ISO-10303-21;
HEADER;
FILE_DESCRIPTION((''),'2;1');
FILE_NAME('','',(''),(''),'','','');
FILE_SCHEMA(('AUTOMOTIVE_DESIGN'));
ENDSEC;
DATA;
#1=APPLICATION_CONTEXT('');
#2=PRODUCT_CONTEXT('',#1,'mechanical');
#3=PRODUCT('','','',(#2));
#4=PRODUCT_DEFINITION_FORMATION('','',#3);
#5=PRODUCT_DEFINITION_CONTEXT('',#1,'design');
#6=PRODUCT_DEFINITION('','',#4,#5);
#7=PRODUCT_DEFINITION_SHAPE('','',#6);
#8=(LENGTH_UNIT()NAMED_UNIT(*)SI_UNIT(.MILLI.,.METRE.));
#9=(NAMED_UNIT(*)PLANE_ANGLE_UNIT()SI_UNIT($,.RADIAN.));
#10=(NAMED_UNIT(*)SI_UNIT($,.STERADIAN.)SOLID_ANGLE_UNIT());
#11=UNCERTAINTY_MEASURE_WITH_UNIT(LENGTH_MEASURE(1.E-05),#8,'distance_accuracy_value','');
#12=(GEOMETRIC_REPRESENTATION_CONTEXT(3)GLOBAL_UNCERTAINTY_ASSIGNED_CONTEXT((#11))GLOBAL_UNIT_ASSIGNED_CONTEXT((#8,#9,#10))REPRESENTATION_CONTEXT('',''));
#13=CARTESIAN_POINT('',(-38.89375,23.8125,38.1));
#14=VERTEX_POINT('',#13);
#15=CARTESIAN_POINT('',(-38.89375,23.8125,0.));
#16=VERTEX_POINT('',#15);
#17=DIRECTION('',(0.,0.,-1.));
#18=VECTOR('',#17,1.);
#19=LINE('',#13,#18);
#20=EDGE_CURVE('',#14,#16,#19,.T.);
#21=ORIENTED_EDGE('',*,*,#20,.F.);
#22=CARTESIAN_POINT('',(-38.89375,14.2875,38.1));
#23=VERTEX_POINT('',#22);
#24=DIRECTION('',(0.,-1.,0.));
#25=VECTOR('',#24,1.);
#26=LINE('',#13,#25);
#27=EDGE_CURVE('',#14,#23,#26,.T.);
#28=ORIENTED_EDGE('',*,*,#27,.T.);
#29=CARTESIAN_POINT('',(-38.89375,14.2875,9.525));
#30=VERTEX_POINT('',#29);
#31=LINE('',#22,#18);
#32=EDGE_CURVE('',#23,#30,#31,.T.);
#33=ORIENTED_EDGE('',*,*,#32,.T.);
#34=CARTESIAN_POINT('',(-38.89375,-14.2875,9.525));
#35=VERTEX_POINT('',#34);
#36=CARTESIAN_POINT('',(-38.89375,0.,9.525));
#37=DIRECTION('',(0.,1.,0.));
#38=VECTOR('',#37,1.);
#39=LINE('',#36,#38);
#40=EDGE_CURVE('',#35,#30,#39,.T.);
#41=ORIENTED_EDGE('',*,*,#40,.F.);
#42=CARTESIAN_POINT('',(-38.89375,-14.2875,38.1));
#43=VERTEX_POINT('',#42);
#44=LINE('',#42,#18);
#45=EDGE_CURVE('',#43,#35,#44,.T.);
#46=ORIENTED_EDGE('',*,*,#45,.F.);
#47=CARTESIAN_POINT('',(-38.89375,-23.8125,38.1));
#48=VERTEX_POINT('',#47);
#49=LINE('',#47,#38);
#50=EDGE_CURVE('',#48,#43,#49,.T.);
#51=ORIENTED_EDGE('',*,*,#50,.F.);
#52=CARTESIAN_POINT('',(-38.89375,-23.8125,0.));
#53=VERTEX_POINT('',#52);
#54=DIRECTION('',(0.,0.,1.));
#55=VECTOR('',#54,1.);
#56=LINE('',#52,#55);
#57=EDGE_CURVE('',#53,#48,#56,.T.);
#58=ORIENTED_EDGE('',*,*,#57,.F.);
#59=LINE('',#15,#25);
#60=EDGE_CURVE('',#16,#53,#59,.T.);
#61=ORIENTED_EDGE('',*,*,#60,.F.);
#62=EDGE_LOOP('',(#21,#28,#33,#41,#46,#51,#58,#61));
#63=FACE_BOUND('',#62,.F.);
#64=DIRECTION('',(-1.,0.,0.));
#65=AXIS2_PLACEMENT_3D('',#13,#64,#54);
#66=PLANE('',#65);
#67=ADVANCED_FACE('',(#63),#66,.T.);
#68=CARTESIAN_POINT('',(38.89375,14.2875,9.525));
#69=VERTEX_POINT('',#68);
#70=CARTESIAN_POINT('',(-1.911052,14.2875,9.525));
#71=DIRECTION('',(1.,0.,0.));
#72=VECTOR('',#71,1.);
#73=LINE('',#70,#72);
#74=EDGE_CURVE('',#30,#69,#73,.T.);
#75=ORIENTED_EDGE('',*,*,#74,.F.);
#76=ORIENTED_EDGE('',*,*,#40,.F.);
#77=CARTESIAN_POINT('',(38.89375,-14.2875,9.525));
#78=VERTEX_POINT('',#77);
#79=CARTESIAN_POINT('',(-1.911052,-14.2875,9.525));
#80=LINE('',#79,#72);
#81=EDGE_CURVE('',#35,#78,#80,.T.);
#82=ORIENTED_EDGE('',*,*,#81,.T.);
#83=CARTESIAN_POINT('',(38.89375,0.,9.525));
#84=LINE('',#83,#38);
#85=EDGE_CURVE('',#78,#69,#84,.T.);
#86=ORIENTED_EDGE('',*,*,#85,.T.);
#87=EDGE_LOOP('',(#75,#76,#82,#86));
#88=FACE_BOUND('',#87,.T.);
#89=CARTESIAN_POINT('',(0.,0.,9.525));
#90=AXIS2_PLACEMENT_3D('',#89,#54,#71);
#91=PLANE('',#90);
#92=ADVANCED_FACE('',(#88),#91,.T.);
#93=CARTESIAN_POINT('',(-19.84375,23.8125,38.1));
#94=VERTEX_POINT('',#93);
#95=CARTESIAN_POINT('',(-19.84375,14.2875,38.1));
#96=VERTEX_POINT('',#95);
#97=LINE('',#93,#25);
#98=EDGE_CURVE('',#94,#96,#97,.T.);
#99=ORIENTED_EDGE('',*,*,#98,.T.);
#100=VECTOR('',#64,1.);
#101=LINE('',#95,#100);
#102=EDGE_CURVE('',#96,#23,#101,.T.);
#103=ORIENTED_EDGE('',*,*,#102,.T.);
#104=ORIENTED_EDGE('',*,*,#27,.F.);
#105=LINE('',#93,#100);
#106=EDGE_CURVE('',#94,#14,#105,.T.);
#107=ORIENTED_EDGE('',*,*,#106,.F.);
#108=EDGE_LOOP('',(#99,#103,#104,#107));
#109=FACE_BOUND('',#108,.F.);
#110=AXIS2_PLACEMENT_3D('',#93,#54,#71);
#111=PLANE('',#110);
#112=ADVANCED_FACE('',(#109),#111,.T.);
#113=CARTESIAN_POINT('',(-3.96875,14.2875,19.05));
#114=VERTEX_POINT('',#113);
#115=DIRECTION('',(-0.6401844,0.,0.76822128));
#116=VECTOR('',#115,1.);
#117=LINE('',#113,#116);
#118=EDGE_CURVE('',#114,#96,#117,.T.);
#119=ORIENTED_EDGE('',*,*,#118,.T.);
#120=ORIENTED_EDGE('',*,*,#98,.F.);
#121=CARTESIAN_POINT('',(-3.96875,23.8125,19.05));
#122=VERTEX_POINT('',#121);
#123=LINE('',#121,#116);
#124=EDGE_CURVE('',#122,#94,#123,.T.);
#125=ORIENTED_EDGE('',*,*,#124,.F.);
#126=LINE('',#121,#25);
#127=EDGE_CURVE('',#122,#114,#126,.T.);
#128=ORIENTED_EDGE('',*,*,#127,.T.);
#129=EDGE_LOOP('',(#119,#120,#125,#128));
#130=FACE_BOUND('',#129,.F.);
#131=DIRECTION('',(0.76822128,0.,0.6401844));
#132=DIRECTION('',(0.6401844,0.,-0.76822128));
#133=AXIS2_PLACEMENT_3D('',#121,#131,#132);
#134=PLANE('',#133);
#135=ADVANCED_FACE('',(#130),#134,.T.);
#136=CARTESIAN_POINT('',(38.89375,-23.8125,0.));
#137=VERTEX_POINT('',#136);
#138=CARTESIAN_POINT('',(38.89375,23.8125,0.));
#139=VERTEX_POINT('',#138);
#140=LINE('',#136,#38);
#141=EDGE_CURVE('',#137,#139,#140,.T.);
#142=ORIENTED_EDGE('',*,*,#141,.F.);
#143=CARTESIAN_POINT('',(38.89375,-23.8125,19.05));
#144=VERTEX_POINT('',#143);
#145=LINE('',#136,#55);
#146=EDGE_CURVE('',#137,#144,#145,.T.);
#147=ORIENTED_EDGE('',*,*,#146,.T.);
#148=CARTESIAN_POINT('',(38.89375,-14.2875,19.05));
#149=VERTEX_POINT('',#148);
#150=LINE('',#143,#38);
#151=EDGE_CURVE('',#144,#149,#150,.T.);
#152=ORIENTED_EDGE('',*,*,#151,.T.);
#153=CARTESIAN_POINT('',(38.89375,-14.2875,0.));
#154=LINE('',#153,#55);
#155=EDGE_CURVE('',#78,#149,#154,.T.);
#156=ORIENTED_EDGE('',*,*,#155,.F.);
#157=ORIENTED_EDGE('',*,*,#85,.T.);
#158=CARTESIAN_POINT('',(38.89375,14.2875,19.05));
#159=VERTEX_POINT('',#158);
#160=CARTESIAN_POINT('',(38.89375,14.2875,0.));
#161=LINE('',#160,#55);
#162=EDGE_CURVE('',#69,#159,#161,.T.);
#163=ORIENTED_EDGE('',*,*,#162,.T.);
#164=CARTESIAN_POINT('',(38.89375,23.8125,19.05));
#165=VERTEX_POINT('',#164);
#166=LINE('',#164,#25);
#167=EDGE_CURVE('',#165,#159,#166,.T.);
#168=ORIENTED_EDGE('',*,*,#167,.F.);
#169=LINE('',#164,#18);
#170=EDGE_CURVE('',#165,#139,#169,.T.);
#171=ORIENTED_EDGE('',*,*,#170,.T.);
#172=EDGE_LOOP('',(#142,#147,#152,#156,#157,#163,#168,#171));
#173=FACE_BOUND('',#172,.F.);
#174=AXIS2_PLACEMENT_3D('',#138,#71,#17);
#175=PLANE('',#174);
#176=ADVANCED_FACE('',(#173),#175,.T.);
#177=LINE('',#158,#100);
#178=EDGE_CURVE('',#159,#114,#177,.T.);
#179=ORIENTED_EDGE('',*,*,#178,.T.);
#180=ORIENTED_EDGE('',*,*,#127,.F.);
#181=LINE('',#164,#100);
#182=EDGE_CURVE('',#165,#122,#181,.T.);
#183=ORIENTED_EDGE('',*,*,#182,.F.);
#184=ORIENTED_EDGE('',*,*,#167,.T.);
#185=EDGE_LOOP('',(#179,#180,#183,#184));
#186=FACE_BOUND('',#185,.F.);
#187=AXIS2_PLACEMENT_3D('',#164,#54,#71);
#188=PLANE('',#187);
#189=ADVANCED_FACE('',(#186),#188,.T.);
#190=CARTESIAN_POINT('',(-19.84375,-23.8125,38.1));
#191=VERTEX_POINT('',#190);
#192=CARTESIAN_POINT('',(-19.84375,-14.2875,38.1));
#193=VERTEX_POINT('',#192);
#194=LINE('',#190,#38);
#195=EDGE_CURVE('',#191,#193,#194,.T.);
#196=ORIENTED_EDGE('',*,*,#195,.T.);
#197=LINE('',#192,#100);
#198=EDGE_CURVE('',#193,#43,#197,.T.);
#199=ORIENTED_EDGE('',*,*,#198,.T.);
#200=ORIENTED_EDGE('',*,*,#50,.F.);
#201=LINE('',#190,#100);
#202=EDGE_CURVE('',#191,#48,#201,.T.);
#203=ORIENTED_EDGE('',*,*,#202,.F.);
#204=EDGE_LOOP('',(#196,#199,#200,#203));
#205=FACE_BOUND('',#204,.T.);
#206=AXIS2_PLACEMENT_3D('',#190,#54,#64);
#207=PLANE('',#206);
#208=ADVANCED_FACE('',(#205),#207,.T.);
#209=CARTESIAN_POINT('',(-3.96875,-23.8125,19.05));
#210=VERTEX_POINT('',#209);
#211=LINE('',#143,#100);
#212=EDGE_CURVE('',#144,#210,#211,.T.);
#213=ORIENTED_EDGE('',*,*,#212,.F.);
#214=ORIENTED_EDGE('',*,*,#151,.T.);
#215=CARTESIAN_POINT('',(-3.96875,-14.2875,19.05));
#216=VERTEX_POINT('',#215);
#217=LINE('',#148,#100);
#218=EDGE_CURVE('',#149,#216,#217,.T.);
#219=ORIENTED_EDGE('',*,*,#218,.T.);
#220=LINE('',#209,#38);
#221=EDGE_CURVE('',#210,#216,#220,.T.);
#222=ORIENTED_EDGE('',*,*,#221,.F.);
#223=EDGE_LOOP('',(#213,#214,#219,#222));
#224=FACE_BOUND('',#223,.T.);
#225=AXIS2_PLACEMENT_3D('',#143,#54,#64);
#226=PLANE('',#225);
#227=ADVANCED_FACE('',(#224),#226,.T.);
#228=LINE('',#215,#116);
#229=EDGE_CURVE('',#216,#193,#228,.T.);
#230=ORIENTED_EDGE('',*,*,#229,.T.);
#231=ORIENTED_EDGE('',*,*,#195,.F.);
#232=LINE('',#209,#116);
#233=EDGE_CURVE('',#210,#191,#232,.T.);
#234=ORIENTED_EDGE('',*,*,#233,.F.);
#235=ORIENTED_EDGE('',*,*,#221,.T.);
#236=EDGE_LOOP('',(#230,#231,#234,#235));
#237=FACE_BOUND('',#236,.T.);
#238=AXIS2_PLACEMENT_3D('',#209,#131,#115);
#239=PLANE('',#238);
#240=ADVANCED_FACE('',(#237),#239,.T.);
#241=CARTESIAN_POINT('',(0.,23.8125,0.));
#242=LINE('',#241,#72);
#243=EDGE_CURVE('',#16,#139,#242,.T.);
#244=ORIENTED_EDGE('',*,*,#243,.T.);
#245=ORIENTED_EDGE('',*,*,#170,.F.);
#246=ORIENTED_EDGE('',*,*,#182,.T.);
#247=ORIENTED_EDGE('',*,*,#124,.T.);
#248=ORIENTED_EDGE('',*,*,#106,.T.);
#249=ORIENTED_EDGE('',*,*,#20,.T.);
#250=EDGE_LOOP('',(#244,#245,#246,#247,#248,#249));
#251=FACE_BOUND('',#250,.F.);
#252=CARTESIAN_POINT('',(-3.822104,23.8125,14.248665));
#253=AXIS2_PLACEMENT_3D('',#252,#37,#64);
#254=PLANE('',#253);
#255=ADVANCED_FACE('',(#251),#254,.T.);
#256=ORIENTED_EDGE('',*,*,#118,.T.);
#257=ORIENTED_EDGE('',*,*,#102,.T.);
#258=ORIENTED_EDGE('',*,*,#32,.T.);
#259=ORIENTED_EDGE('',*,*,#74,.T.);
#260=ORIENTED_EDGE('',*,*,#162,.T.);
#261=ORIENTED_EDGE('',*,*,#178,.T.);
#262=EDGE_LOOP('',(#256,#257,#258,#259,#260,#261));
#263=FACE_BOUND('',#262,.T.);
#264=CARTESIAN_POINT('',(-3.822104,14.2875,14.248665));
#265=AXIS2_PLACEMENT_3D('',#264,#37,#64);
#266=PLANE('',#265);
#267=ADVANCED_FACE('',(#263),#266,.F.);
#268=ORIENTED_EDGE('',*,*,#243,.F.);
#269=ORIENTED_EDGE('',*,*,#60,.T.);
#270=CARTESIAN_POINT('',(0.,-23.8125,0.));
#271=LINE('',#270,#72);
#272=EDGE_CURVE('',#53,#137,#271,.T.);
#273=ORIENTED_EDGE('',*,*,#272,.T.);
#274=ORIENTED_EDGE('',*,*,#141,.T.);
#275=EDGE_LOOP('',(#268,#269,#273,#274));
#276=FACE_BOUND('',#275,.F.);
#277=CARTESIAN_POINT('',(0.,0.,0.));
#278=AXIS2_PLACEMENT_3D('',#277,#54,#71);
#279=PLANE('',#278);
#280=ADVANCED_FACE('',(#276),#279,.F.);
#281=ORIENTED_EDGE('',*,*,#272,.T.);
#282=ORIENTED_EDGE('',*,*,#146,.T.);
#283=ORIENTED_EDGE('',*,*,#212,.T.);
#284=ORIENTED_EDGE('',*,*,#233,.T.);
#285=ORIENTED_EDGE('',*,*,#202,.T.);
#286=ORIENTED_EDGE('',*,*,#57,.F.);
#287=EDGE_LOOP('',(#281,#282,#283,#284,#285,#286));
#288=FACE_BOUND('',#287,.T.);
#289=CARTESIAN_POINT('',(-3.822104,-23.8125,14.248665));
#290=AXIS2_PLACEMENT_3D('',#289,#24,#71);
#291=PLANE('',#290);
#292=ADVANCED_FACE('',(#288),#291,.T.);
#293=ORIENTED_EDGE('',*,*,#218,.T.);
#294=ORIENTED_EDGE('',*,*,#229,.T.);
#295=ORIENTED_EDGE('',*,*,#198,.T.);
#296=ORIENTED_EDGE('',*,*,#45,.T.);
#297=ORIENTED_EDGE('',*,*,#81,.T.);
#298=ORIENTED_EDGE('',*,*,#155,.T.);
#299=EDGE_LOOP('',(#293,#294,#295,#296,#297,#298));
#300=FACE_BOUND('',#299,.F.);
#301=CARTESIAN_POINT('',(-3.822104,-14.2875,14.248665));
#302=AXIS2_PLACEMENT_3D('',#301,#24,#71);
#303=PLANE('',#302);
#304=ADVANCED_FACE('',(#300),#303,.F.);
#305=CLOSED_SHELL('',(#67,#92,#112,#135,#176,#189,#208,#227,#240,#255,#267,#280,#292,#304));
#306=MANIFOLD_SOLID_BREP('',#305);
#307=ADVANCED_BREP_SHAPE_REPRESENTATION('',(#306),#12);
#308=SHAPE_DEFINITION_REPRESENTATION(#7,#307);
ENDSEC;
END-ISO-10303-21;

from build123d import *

# Parameters (mm, degrees)
F0_W     = 77.7875
F0_H     = 47.625
F1_DEPTH = 9.525
F3_DEPTH = 9.525


# Not quite as in the source:
# - a pattern or mirror of a feature is missing from the dataset's text; its kind, count and spacing are read off the source's solid


with BuildPart() as f1:
    # F0 (on Top) → F1 (new body)
    with BuildSketch(Plane.XY):
        Rectangle(F0_W, F0_H)
    extrude(amount=F1_DEPTH)

    # F2 (on face) → F3 (join)
    with BuildSketch(Plane.XZ.offset(23.8125)):
        Polygon((-38.89375, 38.1), (-38.89375, 0), (38.89375, 0), (38.89375, 19.05), (-3.96875, 19.05), (-19.84375, 38.1), align=None)
    f3 = extrude(amount=-F3_DEPTH)

    # F3_copies: F3 across plane
    add(f3.mirror(Plane.ZX))


solid = f1.part
